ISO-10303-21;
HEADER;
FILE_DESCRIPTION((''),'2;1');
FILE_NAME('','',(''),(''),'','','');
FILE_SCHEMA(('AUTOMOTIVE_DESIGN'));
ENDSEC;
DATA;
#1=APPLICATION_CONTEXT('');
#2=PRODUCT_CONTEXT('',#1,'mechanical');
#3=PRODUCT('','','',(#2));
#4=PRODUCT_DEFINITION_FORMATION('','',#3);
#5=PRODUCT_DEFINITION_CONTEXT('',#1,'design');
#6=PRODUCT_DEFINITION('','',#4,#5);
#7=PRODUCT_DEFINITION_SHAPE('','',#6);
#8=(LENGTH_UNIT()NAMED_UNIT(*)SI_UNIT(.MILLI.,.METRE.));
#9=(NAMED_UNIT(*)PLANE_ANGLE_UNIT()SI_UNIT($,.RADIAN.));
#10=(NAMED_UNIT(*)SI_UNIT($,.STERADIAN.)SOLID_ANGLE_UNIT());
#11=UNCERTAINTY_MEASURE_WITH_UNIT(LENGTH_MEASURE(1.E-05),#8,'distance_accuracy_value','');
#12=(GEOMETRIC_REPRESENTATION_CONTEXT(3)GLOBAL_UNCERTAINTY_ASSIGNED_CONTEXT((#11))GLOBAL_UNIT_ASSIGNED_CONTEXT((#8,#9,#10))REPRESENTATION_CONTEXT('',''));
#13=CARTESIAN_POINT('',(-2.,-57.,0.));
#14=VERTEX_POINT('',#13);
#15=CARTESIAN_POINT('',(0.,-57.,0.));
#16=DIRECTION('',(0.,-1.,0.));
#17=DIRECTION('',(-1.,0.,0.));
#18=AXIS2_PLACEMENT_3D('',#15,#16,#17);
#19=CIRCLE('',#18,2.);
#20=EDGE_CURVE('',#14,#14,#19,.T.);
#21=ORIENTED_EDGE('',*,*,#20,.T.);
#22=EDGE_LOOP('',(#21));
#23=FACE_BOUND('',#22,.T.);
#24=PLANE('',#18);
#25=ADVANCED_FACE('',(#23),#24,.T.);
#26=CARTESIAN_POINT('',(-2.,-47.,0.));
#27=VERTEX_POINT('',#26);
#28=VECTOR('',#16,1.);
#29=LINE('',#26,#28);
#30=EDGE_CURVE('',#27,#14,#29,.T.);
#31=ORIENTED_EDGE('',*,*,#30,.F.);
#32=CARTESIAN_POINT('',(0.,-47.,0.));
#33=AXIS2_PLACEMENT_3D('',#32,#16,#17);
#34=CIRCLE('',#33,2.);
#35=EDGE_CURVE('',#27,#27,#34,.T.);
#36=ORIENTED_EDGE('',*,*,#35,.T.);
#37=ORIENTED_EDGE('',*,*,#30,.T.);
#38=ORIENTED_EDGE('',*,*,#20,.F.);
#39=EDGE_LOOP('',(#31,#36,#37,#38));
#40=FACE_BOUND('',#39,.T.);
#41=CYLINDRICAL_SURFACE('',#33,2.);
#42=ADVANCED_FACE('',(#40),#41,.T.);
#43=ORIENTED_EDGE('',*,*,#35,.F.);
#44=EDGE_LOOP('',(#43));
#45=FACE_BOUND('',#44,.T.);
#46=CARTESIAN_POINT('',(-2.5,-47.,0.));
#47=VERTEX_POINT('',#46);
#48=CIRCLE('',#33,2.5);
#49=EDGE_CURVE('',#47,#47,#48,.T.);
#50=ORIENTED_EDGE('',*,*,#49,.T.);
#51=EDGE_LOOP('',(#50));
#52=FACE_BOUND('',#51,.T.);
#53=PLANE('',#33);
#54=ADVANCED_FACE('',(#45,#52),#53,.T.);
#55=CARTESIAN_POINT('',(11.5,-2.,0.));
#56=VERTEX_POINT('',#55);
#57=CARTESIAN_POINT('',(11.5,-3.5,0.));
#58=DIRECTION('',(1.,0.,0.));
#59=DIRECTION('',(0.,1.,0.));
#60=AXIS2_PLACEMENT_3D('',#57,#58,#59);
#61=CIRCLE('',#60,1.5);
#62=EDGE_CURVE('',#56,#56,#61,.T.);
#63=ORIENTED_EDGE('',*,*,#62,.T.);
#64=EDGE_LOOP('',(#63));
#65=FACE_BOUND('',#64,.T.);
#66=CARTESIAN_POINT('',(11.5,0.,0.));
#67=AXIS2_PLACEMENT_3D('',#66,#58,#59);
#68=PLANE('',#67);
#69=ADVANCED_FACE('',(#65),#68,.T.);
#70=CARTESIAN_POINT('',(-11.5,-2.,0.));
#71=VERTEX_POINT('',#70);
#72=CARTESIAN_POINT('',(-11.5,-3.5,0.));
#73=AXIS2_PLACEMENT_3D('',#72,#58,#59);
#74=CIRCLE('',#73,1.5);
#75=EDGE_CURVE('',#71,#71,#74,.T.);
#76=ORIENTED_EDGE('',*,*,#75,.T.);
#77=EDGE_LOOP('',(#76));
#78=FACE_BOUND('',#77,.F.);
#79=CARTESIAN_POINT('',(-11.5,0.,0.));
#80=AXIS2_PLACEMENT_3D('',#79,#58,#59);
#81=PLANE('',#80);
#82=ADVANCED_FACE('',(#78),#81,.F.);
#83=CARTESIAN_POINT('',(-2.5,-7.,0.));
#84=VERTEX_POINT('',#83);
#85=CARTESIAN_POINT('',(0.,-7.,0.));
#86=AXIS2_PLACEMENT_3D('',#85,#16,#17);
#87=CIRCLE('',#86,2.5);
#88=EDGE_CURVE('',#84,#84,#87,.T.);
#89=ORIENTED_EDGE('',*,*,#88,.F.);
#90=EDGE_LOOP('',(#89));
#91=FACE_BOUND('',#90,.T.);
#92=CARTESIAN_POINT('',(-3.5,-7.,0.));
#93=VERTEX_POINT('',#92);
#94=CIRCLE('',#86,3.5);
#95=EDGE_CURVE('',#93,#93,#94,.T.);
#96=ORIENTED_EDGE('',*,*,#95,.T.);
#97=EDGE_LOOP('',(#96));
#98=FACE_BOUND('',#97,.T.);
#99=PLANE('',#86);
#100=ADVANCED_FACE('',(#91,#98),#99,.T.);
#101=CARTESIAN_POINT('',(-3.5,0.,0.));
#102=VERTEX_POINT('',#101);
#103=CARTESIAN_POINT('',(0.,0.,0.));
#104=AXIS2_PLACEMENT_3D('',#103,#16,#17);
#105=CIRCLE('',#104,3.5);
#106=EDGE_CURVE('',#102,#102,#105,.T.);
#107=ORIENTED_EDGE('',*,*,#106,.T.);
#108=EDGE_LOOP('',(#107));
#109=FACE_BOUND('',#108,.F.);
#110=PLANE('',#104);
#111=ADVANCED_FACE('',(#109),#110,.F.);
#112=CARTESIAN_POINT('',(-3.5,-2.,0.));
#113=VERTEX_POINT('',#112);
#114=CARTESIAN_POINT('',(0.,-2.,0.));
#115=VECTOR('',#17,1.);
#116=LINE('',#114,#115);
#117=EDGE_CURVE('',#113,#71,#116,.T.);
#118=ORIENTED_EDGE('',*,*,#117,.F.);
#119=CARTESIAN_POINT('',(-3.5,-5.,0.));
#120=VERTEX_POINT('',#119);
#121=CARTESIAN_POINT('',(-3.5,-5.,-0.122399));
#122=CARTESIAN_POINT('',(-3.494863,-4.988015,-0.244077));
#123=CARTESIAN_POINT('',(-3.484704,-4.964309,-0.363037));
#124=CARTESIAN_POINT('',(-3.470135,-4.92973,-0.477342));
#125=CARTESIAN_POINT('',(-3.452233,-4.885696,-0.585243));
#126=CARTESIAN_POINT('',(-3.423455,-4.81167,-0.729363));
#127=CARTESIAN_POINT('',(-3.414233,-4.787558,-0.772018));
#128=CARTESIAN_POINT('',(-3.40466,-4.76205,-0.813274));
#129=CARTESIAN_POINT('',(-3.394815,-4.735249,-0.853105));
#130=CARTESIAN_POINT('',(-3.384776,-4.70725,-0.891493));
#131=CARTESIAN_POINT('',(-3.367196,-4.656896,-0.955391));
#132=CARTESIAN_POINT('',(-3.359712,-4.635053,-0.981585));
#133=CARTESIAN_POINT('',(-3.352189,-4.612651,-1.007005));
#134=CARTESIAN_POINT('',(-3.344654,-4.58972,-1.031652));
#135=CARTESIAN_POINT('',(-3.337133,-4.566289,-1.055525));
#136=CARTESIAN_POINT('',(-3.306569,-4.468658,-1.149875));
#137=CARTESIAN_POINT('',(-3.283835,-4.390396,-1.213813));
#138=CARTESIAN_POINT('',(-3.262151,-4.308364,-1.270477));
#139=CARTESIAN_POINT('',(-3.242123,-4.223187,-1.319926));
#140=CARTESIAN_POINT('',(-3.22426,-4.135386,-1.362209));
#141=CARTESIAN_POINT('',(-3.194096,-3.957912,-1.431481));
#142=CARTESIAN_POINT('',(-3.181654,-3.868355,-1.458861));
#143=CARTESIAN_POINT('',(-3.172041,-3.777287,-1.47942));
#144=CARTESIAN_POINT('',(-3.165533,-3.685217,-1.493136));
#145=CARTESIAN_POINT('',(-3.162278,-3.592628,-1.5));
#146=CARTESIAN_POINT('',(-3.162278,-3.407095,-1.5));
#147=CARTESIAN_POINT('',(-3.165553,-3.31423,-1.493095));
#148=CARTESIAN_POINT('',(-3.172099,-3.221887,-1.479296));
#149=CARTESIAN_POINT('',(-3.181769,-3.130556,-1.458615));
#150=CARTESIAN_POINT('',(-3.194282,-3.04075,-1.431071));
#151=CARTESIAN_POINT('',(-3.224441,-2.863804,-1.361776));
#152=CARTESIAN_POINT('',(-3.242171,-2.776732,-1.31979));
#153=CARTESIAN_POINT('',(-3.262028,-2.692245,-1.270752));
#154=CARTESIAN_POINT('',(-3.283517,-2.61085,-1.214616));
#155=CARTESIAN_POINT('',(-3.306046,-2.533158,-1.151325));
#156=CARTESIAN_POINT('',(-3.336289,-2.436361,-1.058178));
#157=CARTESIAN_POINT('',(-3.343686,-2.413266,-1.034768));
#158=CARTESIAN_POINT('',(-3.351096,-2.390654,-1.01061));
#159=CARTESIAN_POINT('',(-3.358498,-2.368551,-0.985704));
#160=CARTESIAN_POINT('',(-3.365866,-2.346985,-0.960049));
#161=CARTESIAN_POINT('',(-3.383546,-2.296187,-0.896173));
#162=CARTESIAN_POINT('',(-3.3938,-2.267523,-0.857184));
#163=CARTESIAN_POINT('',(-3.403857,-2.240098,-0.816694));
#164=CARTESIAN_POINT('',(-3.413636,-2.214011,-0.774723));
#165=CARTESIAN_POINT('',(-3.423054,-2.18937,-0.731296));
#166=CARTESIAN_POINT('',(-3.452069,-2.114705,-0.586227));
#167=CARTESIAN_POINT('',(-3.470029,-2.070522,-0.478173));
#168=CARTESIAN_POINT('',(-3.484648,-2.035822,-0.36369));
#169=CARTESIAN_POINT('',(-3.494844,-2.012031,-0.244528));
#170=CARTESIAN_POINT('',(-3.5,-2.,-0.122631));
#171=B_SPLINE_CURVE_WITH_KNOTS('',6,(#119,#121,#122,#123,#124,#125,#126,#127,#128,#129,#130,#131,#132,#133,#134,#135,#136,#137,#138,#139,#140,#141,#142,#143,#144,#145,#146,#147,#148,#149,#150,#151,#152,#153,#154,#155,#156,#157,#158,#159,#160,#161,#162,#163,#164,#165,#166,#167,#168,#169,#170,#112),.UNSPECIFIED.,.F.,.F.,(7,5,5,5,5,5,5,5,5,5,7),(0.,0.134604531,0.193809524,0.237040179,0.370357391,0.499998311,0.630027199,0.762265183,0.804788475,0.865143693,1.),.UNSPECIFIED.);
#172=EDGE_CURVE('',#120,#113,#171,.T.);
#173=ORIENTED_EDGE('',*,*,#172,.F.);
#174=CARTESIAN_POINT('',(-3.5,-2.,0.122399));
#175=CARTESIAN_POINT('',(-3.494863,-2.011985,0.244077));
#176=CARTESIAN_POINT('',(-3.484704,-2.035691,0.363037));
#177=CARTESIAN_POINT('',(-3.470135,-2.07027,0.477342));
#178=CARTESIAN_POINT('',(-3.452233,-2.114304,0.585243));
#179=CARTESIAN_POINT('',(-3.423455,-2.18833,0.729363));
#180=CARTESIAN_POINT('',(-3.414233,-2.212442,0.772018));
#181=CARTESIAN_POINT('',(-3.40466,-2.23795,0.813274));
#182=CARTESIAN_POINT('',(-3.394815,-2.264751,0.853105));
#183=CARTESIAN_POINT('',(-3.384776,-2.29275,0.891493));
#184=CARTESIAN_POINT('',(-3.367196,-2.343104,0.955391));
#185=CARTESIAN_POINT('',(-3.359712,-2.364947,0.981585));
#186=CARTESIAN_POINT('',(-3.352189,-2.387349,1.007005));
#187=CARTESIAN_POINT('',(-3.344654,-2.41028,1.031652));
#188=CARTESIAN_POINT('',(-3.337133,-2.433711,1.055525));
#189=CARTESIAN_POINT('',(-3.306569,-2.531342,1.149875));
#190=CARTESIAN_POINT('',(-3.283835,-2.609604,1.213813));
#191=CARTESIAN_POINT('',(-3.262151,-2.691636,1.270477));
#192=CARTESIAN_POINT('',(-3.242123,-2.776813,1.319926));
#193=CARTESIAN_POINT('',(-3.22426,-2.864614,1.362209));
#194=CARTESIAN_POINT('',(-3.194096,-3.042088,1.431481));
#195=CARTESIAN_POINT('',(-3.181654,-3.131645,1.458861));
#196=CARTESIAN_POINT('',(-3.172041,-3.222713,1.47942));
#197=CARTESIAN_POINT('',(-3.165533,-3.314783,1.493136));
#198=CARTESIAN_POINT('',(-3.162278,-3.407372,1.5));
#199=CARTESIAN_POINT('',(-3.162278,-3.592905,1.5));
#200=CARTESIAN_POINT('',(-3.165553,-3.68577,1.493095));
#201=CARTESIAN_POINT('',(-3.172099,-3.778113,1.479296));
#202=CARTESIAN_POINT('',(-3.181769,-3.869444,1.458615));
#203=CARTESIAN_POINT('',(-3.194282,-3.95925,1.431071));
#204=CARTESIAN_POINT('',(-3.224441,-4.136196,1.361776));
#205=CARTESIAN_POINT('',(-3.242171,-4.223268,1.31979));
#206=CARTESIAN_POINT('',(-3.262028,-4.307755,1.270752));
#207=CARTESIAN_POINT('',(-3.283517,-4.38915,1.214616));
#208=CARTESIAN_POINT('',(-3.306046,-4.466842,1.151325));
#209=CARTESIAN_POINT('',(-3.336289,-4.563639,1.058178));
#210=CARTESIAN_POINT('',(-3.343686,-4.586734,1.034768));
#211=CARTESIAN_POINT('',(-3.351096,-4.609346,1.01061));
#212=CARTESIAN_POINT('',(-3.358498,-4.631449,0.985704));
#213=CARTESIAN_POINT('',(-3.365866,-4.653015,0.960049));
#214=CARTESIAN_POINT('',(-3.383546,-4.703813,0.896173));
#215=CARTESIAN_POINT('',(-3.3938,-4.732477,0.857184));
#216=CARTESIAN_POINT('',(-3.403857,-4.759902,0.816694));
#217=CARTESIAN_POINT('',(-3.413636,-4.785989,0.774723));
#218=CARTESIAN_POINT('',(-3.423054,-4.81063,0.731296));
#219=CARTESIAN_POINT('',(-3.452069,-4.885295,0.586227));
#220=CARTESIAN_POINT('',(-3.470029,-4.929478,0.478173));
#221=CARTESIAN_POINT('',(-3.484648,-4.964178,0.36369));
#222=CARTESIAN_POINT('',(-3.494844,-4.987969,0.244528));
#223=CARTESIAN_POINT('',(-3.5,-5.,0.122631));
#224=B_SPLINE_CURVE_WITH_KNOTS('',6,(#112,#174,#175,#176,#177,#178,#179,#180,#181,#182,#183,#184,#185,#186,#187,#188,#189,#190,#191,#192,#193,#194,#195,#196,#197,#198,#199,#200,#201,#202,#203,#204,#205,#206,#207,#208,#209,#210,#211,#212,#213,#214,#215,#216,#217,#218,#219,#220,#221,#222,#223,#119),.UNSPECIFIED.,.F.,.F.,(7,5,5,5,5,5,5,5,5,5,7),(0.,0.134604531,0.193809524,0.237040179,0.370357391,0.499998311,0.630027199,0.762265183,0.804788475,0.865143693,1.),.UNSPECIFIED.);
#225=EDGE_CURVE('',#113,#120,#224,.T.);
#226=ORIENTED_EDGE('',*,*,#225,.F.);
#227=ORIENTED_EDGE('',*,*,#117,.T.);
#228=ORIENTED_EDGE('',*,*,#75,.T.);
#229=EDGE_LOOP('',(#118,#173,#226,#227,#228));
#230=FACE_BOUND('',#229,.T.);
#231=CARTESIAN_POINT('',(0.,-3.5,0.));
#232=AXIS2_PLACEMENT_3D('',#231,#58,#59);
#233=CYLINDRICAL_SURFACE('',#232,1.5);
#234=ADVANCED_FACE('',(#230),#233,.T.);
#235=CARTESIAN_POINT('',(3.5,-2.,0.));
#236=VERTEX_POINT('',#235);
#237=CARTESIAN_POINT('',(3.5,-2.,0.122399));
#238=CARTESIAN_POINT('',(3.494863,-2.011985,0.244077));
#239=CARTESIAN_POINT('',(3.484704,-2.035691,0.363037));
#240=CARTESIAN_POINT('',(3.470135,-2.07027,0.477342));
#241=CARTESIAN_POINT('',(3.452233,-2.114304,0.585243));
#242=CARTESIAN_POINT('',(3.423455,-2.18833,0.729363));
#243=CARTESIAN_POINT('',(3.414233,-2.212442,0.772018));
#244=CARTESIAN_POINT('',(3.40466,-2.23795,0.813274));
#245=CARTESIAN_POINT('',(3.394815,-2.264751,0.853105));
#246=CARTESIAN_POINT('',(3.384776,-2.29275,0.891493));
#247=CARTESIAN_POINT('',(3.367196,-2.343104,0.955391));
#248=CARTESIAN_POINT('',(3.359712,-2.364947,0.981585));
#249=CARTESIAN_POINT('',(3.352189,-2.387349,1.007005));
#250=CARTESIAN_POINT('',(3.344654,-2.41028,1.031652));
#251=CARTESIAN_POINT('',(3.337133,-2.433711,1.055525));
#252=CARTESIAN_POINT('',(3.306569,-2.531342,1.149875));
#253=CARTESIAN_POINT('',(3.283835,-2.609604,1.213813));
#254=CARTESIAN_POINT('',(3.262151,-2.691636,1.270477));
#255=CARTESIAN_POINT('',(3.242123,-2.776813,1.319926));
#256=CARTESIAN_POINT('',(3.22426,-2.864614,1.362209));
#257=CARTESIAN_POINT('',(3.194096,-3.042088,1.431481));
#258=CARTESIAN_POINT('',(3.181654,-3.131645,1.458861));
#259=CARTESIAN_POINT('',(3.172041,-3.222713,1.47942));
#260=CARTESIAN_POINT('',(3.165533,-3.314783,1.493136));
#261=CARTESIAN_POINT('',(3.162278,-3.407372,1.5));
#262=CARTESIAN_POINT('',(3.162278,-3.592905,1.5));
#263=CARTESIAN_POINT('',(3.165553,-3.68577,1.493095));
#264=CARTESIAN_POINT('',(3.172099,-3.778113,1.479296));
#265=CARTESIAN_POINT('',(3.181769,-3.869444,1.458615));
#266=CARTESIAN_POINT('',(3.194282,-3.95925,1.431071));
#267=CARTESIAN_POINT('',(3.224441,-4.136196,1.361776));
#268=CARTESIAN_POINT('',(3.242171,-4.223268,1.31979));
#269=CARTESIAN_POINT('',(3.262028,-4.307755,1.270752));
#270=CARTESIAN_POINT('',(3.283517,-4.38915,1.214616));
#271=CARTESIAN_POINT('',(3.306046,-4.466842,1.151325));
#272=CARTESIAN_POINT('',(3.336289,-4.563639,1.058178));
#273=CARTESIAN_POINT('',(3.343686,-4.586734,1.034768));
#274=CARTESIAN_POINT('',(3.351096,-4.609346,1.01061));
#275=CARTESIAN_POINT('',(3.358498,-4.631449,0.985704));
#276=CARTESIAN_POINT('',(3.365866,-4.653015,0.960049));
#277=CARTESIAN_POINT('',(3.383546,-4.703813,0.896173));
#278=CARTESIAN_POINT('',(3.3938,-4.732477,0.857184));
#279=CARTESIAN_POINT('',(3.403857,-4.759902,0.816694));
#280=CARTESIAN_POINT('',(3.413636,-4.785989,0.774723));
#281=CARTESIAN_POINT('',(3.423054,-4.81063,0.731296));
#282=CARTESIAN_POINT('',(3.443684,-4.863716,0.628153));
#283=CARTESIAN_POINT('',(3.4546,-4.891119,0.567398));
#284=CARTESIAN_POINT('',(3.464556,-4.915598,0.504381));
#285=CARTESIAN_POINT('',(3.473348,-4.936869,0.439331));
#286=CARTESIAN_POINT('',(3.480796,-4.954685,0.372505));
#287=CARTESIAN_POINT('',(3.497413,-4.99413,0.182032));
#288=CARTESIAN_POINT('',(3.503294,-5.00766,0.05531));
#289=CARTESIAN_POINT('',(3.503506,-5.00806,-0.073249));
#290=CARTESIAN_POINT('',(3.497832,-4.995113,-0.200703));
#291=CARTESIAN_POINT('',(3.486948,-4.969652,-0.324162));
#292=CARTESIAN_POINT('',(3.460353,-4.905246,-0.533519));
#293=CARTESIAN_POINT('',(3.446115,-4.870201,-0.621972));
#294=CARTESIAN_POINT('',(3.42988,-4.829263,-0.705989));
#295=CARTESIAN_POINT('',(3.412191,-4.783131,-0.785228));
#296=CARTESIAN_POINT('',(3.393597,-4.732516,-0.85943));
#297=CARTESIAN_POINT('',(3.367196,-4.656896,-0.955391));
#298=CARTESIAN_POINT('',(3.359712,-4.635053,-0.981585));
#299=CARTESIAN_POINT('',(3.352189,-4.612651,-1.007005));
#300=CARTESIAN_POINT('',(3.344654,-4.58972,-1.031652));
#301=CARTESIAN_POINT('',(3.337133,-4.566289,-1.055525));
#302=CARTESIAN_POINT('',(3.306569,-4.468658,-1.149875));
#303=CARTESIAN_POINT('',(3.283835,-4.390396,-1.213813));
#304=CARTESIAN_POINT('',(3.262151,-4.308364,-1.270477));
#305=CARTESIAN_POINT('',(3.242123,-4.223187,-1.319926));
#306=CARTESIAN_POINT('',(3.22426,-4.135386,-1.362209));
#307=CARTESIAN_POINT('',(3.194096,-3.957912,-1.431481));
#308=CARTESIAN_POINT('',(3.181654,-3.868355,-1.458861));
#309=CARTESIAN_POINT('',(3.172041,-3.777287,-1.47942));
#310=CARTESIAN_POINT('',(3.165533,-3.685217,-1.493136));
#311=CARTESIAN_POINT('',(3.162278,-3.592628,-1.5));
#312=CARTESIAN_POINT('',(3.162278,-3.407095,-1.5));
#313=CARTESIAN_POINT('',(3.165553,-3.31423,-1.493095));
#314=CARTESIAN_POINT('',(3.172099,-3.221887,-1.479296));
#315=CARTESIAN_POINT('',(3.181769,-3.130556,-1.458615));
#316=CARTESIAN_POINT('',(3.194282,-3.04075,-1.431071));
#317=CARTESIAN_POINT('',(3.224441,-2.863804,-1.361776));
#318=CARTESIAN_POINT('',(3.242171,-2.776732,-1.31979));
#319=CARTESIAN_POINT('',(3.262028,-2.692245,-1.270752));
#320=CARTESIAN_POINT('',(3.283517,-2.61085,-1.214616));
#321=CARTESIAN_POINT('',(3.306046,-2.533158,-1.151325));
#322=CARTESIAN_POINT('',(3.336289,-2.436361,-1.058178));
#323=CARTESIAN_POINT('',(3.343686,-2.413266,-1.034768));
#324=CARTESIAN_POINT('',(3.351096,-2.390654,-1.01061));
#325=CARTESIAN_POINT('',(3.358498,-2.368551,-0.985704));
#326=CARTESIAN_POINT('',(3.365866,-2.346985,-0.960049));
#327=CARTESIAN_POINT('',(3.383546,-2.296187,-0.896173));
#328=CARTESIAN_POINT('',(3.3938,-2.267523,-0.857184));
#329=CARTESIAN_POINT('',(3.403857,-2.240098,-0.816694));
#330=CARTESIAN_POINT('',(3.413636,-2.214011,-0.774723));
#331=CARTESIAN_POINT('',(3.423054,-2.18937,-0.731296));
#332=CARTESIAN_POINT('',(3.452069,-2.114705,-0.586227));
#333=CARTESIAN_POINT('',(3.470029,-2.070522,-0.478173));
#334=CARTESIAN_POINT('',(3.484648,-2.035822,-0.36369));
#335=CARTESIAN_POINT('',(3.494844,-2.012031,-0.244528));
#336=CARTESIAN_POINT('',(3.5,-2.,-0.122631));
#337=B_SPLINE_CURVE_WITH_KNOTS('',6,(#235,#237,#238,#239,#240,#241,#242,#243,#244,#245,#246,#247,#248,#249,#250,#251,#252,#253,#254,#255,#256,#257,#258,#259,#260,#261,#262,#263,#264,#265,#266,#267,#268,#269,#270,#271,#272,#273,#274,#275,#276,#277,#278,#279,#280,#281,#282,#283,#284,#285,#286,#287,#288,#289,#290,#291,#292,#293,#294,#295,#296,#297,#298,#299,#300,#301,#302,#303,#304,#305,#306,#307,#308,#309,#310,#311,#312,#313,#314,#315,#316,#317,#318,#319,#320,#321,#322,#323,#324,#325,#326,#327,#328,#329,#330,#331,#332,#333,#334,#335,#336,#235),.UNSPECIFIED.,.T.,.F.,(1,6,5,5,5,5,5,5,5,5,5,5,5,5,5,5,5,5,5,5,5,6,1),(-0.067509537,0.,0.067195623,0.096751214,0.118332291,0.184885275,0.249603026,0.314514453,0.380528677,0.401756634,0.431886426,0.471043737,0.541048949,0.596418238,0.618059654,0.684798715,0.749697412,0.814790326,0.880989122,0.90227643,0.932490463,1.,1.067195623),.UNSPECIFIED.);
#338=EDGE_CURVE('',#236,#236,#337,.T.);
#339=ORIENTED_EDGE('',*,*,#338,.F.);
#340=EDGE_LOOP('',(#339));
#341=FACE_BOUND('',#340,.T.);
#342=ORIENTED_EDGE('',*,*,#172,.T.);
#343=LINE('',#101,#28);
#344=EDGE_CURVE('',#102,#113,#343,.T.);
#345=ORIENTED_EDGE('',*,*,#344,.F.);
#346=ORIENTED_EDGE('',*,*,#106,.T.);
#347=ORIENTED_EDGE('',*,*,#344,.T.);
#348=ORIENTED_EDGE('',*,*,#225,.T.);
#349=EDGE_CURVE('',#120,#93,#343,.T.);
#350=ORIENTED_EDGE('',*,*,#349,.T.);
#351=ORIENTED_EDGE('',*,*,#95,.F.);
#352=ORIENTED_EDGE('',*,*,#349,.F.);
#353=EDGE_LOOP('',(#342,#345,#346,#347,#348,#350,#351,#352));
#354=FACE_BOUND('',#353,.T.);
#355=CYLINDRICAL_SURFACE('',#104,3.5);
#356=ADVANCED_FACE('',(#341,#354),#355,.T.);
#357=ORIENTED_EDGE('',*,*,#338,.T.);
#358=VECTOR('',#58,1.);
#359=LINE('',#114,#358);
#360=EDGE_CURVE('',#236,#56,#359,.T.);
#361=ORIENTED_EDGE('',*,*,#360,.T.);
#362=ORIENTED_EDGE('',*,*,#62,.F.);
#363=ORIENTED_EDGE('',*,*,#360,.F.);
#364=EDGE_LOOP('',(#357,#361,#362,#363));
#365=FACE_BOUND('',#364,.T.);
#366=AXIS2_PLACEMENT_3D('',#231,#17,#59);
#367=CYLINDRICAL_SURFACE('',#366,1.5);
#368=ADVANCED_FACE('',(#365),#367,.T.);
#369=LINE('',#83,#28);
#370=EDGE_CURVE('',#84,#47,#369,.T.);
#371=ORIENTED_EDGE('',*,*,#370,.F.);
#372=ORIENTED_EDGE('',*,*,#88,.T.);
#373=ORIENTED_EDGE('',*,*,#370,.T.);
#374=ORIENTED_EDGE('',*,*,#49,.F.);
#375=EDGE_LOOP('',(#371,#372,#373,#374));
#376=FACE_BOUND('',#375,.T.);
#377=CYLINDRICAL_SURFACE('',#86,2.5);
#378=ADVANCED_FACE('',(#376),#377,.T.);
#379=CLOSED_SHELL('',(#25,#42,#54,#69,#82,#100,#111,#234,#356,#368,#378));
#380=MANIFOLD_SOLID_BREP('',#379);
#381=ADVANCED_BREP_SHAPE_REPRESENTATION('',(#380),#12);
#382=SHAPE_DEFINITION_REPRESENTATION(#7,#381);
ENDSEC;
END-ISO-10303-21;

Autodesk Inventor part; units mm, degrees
ref_plane "YZ Plane" through (0, 0, 0) normal (1, 0, 0) x (0, 1, 0)
ref_plane "XZ Plane" through (0, 0, 0) normal (0, 1, 0) x (-1, 0, 0)
ref_plane "XY Plane" through (0, 0, 0) normal (0, 0, 1) x (1, 0, 0)
sketch "Sketch1" plane through (0, 0, 0) normal (0, 0, 1) x (1, 0, 0)
  line L0 (-2.5, -7) -> (-2.5, -47)
  line L1 (-3.5, 0) -> (-3.5, -7)
  line L2 (-3.5, -7) -> (-2.5, -7)
  line L3 (-2, -47) -> (-2, -57)
  line L4 (-2.5, -47) -> (-2, -47)
  line L5 (-2, -57) -> (0, -57)
  line L6 (-3.5, 0) -> (0, 0)
  line L7 (0, 0) -> (0, -59)
  dimension "d1" = 7
  dimension "d3" = 40
  dimension "d5" = 10
revolve "Revolution1" add sketch "Sketch1" angle 360 about axis through (0, 0, 0) along (0, -1, 0)
thread "Thread1" size "M5x0.8" class "6g" standard "ANSI Metric M Profile" length 11
sketch "Sketch2" plane through (0, 0, 0) normal (1, 0, 0) x (0, 1, 0)
  line L0 (-7, 3.5) -> (-7, -3.5) projected
  line L1 (0, 3.5) -> (0, -3.5) projected
  circle A0 centre (-3.5, 0) radius 1.5
  point P0 (0, 0)
  dimension "d11" = 3
  dimension "d12" = 3.5
  dimension "d13" = 3.5
extrude "Extrusion1" add sketch "Sketch2" along normal mid plane 23
properties part number "HUDSON-1-84"
